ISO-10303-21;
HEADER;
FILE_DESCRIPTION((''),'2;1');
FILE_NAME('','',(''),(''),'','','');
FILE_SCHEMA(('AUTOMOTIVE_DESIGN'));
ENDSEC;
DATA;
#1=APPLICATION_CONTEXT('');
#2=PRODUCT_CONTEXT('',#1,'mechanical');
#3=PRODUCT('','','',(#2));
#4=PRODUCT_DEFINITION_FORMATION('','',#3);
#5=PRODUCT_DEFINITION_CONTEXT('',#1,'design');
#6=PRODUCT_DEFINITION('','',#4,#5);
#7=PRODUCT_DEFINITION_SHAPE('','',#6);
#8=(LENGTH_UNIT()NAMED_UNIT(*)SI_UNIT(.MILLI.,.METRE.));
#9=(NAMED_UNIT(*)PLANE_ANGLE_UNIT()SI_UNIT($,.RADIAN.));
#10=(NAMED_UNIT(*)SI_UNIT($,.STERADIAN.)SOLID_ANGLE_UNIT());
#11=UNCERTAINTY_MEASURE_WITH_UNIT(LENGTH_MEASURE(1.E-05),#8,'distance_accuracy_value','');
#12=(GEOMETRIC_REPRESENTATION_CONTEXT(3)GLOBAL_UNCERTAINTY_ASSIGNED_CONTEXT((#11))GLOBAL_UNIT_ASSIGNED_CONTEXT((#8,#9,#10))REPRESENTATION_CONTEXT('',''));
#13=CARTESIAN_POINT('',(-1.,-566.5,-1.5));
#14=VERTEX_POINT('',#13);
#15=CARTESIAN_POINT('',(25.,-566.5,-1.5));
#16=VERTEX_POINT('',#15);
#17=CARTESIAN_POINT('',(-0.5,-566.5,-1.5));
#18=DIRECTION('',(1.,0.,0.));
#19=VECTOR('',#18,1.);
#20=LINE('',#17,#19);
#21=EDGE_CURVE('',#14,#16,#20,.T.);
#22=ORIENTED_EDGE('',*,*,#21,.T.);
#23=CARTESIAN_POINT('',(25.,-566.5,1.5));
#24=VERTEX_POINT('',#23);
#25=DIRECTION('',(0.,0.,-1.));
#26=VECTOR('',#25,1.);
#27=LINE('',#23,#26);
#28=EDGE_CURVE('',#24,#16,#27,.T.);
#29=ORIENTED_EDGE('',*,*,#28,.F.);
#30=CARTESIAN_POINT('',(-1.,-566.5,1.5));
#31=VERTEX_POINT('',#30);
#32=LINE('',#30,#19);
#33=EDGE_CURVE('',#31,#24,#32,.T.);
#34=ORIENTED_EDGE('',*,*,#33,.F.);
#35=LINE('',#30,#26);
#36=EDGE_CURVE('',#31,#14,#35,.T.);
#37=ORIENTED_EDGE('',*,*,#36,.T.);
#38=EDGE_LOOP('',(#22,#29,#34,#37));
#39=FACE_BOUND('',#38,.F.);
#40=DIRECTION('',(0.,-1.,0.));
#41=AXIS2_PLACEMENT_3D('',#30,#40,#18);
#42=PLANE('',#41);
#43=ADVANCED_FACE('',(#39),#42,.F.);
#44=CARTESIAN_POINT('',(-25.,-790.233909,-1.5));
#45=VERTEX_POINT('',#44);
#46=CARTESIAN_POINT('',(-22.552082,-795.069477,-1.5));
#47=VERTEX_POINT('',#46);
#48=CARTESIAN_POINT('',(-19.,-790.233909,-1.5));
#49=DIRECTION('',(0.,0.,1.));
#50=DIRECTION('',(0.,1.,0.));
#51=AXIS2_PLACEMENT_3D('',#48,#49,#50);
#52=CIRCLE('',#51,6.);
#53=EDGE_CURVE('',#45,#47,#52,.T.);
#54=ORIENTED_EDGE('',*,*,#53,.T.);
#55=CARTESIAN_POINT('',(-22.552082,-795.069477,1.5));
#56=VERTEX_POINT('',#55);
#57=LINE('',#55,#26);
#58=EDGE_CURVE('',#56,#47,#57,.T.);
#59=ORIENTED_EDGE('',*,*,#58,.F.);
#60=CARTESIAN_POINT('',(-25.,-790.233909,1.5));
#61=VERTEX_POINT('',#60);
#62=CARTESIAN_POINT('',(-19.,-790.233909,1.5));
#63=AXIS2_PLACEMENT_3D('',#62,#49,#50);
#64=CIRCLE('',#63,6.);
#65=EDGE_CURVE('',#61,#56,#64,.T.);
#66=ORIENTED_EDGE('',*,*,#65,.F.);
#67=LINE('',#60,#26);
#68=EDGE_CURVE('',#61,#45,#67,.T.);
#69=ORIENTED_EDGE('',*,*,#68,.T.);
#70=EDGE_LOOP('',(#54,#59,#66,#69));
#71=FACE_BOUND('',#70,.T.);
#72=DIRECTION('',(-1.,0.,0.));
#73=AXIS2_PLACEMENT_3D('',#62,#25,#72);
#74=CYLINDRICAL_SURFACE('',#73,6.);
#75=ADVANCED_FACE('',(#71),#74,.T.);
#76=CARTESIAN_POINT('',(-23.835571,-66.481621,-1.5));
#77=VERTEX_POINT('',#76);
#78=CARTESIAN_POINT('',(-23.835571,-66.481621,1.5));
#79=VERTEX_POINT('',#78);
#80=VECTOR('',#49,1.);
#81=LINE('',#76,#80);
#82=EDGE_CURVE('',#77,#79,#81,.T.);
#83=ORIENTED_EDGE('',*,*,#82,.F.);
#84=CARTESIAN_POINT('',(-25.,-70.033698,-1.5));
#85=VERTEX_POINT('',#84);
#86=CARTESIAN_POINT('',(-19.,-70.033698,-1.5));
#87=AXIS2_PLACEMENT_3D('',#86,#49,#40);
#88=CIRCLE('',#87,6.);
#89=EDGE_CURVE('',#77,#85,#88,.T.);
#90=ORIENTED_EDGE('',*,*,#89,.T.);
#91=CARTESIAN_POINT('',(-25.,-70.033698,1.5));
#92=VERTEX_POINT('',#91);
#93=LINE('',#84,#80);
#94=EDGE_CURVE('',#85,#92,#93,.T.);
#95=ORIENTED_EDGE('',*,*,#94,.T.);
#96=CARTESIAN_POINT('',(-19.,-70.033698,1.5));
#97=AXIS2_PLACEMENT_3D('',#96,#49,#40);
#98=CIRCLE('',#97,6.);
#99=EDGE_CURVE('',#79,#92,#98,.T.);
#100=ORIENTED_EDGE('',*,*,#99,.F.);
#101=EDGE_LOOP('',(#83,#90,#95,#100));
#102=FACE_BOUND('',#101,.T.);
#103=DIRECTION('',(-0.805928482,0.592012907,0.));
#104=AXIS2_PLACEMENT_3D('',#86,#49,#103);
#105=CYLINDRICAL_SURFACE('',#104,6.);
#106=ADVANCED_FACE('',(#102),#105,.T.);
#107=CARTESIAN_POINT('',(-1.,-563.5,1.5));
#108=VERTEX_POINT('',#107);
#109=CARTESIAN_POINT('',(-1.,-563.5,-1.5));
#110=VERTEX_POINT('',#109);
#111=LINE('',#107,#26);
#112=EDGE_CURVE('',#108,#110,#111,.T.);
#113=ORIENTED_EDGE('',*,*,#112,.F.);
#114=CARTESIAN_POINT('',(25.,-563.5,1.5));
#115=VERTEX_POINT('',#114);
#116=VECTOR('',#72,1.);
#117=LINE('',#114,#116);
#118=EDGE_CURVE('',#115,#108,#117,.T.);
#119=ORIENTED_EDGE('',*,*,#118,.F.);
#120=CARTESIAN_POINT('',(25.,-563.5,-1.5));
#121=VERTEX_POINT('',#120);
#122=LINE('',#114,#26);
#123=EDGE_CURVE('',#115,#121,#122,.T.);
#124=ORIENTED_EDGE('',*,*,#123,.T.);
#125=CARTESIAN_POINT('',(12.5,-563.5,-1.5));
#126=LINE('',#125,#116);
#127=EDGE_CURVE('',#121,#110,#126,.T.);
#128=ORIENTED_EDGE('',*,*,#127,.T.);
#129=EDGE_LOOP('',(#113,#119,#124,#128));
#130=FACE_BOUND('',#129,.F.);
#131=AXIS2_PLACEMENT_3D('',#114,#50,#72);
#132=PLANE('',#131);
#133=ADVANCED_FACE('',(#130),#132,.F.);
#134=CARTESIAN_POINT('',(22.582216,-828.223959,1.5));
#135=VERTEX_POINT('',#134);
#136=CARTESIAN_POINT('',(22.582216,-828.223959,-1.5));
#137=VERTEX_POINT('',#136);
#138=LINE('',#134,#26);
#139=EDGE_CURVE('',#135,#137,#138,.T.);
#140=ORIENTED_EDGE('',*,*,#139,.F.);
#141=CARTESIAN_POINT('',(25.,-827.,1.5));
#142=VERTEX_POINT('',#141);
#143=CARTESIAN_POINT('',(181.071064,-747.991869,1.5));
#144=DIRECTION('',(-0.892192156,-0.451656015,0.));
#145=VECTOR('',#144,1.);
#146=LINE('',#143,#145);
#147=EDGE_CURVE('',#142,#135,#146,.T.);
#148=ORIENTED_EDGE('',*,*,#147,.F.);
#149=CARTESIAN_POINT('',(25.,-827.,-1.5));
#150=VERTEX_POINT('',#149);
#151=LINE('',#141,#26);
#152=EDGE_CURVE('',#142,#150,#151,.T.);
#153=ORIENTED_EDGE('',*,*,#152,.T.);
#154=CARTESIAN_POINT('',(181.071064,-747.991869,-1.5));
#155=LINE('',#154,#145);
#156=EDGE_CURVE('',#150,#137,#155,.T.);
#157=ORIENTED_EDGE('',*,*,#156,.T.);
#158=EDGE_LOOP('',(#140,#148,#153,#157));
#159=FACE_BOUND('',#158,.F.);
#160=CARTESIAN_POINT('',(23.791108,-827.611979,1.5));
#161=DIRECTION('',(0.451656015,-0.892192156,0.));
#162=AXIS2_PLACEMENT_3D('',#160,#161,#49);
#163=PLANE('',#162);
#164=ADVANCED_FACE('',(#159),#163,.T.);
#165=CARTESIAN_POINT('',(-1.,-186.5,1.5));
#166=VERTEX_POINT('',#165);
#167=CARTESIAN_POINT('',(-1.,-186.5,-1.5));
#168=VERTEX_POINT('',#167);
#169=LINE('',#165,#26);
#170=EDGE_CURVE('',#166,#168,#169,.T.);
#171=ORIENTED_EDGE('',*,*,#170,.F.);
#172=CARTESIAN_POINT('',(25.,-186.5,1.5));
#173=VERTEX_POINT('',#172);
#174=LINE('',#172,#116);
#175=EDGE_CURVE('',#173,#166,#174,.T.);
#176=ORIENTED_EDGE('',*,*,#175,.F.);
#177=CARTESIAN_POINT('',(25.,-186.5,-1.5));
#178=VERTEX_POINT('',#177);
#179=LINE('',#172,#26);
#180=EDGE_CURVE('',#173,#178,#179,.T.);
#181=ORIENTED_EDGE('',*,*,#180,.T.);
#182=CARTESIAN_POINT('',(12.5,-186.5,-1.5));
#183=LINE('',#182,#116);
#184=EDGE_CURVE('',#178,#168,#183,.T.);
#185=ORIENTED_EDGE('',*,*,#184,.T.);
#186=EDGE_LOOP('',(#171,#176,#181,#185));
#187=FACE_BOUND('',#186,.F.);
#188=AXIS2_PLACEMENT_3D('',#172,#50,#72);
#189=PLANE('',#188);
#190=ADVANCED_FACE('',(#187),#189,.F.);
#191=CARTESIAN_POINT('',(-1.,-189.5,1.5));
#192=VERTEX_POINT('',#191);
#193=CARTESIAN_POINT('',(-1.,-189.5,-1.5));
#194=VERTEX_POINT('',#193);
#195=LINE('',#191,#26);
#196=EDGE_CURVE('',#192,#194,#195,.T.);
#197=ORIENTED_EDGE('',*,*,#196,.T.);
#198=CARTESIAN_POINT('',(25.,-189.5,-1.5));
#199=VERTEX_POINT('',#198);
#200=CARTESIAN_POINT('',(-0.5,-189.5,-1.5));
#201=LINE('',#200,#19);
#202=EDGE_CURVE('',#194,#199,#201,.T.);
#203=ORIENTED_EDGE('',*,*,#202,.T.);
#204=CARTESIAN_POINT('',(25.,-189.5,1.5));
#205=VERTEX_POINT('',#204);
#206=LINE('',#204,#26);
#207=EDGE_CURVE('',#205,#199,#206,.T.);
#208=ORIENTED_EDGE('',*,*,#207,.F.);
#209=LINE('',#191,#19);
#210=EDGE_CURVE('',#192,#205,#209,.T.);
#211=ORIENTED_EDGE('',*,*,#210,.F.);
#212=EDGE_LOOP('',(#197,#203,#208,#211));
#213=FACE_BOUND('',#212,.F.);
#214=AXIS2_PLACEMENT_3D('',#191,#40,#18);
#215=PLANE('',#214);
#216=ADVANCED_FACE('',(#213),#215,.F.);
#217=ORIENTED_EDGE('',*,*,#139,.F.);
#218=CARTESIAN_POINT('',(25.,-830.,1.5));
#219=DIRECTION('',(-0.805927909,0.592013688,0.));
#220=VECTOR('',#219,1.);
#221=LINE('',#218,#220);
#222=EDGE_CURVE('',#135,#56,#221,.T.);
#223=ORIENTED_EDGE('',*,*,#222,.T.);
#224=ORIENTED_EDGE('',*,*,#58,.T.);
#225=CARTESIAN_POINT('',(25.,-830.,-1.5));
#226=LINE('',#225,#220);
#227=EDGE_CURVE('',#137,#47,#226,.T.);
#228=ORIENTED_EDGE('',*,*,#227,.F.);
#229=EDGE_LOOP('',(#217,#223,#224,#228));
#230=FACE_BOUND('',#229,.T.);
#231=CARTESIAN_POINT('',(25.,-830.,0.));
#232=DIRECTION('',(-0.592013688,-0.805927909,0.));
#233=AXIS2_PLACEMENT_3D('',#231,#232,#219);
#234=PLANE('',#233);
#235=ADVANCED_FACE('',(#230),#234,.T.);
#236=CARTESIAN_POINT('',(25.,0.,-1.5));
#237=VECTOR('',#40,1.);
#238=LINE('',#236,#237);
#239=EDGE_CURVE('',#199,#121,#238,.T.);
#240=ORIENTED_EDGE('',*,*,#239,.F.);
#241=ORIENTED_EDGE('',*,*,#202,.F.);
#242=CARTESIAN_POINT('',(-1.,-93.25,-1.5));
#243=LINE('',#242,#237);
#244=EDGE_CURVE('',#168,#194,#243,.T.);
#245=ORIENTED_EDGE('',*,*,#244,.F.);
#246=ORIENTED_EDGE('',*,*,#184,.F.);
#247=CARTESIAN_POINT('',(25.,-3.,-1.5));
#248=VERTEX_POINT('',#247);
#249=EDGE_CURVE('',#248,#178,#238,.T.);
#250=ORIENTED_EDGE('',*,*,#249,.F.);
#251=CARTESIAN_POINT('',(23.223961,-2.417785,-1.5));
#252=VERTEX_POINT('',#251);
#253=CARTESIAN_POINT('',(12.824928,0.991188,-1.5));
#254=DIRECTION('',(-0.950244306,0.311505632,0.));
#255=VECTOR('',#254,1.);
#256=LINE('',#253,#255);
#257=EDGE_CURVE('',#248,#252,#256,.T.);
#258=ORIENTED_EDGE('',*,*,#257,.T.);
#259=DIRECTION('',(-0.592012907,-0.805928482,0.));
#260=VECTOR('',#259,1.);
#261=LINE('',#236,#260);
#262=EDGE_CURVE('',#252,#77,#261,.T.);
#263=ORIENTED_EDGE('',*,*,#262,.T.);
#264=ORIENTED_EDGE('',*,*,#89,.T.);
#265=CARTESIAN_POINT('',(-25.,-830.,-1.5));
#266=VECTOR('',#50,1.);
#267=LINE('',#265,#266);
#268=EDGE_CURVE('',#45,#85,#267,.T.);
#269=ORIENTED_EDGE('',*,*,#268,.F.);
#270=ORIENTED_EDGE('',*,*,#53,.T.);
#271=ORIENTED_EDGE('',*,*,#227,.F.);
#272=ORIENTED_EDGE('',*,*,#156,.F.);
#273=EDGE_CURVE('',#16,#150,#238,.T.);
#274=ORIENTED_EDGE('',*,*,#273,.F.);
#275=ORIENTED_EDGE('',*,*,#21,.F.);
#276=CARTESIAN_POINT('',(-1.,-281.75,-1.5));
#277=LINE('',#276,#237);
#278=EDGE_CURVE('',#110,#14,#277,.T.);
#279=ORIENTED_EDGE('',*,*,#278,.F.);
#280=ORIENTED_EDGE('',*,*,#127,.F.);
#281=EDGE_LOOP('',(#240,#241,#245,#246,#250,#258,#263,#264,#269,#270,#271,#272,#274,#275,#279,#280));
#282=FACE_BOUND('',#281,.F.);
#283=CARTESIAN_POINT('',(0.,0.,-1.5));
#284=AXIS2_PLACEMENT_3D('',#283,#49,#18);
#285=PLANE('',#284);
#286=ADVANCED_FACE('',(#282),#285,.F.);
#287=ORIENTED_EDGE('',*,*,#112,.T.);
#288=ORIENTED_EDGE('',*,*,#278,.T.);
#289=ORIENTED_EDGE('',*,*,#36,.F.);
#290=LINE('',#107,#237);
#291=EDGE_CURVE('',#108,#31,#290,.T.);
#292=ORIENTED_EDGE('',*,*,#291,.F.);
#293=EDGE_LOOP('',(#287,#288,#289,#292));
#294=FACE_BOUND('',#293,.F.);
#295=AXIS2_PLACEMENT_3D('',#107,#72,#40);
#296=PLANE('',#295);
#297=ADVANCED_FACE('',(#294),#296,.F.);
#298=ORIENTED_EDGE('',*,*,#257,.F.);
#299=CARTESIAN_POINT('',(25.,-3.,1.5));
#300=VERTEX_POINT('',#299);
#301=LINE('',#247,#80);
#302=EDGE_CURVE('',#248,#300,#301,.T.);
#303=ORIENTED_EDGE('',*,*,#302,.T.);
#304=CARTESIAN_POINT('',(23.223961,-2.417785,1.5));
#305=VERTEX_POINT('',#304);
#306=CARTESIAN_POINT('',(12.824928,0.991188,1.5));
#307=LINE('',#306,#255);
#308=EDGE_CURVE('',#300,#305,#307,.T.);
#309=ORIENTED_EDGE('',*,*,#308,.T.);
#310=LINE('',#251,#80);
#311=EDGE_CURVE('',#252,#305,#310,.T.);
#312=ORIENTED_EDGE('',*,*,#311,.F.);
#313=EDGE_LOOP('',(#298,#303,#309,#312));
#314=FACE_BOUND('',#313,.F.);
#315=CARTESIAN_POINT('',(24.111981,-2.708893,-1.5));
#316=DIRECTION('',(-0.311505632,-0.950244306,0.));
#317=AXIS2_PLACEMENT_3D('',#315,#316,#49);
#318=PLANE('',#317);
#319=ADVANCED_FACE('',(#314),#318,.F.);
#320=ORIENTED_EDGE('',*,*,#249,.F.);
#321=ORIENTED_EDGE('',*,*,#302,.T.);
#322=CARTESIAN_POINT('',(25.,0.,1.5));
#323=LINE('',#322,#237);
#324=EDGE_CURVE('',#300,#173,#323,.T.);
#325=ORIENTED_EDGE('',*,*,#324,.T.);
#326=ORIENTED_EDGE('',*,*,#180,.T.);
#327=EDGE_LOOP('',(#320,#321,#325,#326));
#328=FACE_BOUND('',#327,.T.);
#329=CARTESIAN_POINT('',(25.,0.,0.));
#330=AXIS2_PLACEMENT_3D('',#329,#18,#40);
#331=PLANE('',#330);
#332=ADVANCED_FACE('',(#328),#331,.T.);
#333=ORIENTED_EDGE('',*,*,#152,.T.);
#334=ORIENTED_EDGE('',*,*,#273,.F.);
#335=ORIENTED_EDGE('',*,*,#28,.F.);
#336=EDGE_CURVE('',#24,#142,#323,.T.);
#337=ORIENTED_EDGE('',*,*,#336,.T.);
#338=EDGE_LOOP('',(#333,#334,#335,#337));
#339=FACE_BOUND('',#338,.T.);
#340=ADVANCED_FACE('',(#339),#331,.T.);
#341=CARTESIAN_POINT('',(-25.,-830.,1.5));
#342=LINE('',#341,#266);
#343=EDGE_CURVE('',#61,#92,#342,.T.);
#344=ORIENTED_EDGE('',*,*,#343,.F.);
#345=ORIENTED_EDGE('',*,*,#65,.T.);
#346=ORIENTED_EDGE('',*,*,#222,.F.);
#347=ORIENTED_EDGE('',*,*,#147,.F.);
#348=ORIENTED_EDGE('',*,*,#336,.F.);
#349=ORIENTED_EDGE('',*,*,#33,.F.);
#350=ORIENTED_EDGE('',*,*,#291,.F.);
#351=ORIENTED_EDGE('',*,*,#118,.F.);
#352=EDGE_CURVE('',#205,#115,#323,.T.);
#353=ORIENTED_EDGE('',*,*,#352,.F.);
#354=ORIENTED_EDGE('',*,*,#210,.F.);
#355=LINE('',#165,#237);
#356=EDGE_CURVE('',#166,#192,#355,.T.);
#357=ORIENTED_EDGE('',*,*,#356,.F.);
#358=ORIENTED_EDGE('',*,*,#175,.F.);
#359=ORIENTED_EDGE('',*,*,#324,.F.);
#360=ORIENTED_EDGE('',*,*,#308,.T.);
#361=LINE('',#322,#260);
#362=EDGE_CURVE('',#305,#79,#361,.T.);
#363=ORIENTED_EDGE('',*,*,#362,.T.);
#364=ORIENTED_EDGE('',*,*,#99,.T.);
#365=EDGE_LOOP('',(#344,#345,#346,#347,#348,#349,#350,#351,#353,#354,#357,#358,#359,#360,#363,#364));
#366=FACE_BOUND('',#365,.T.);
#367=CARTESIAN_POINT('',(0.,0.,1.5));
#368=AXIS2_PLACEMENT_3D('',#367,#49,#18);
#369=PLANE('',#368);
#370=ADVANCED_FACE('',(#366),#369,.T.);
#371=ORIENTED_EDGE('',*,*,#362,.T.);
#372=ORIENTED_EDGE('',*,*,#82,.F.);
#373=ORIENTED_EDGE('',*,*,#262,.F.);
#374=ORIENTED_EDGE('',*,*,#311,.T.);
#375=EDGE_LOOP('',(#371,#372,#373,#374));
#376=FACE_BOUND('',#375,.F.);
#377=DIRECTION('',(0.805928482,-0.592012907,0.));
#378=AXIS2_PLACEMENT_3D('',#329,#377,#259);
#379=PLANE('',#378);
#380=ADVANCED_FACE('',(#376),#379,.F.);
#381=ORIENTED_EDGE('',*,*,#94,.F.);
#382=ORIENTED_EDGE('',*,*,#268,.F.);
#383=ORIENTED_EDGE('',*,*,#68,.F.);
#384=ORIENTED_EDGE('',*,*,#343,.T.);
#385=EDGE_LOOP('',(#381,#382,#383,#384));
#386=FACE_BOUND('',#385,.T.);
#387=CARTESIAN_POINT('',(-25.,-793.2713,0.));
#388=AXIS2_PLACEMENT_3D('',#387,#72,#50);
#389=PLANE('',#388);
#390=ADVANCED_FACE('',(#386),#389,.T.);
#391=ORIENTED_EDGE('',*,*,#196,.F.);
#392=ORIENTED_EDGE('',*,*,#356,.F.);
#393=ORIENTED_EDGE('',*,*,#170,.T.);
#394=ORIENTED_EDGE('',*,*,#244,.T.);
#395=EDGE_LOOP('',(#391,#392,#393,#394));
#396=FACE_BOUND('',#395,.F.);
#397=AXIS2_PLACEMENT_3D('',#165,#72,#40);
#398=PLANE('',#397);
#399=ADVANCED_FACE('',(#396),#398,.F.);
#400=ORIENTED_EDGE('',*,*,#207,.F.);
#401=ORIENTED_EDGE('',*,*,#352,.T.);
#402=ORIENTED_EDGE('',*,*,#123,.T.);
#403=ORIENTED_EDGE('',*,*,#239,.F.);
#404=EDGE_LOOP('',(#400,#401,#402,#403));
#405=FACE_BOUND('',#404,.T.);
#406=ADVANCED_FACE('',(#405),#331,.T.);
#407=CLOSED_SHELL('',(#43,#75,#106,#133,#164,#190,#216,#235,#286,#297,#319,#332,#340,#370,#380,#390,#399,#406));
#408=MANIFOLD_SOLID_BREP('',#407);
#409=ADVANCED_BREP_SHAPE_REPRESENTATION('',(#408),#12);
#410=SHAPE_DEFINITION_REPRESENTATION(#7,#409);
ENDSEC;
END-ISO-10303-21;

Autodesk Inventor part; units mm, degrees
ref_plane "YZ Plane" through (0, 0, 0) normal (1, 0, 0) x (0, 1, 0)
ref_plane "XZ Plane" through (0, 0, 0) normal (0, 1, 0) x (-1, 0, 0)
ref_plane "XY Plane" through (0, 0, 0) normal (0, 0, 1) x (1, 0, 0)
sketch "Sketch1" plane through (0, 0, 0) normal (0, 0, 1) x (1, 0, 0)
  line L0 (-25, 0) -> (25, 0)
  line L1 (25, 0) -> (25, -830)
  line L2 (25, -830) -> (-25, -830)
  line L3 (-25, -830) -> (-25, 0)
  line L4 (25, -830) -> (-25, -793.2713)
  line L5 (25, 0) -> (-25, -68.0668)
  point P0 (0, 0)
  point P1 (0, 0)
  point P2 (25, -1153.2713)
  dimension "d0" = 50
  dimension "d1" = 830
  dimension "d5" = 53.7
  dimension "d6" = 53.7
extrude "Plate1" add sketch "Sketch1" along normal mid plane 3 contours L1 L4 L3 L5
chamfer "Corner Chamfer1" distance 3 angle 45 1 edges at (25, -830, 0)
chamfer "Corner Chamfer2" distance 3 angle 45 1 edges at (25, 0, 0)
fillet "Corner Round1" radius 6 1 edges at (-25, -68.0668, 0)
fillet "Corner Round2" radius 6 1 edges at (-25, -793.2713, 0)
sketch "Sketch2" plane through (0, 0, 1.5) normal (0, 0, 1) x (1, 0, 0)
  line L0 (25, -186.5) -> (-1, -186.5)
  line L1 (-1, -186.5) -> (-1, -189.5)
  line L2 (-1, -189.5) -> (25, -189.5)
  line L3 (25, -189.5) -> (25, -186.5)
  line L4 (25, -3) -> (25, -827) projected
  point P0 (0, 0)
  point P1 (25, -188)
  dimension "d15" = 188
  dimension "d16" = 26
  dimension "d17" = 3
extrude "Extrusion1" cut sketch "Sketch2" against normal through all
pattern_linear "Rectangular Pattern1" count 2 spacing 377 along (0, -1, 0) of "Extrusion1"
equation "\"d6\" = d5"
equation "\"d2\" = Thickness"
equation "\"BendReliefWidth\" = Thickness"
equation "\"BendReliefDepth\" = 0.5 * Thickness"
equation "\"CornerReliefSize\" = 4 * Thickness"
equation "\"MinimumRemnant\" = 2 * Thickness"
equation "\"TransitionRadius\" = BendRadius"
equation "\"JacobiRadiusSize\" = BendRadius"
equation "\"GapSize\" = Thickness"
equation "\"Thickness\" = 3"
equation "\"BendRadius\" = 5"
properties part number "MSC 0163 stringer cone exit back" material "Stainless Steel"
